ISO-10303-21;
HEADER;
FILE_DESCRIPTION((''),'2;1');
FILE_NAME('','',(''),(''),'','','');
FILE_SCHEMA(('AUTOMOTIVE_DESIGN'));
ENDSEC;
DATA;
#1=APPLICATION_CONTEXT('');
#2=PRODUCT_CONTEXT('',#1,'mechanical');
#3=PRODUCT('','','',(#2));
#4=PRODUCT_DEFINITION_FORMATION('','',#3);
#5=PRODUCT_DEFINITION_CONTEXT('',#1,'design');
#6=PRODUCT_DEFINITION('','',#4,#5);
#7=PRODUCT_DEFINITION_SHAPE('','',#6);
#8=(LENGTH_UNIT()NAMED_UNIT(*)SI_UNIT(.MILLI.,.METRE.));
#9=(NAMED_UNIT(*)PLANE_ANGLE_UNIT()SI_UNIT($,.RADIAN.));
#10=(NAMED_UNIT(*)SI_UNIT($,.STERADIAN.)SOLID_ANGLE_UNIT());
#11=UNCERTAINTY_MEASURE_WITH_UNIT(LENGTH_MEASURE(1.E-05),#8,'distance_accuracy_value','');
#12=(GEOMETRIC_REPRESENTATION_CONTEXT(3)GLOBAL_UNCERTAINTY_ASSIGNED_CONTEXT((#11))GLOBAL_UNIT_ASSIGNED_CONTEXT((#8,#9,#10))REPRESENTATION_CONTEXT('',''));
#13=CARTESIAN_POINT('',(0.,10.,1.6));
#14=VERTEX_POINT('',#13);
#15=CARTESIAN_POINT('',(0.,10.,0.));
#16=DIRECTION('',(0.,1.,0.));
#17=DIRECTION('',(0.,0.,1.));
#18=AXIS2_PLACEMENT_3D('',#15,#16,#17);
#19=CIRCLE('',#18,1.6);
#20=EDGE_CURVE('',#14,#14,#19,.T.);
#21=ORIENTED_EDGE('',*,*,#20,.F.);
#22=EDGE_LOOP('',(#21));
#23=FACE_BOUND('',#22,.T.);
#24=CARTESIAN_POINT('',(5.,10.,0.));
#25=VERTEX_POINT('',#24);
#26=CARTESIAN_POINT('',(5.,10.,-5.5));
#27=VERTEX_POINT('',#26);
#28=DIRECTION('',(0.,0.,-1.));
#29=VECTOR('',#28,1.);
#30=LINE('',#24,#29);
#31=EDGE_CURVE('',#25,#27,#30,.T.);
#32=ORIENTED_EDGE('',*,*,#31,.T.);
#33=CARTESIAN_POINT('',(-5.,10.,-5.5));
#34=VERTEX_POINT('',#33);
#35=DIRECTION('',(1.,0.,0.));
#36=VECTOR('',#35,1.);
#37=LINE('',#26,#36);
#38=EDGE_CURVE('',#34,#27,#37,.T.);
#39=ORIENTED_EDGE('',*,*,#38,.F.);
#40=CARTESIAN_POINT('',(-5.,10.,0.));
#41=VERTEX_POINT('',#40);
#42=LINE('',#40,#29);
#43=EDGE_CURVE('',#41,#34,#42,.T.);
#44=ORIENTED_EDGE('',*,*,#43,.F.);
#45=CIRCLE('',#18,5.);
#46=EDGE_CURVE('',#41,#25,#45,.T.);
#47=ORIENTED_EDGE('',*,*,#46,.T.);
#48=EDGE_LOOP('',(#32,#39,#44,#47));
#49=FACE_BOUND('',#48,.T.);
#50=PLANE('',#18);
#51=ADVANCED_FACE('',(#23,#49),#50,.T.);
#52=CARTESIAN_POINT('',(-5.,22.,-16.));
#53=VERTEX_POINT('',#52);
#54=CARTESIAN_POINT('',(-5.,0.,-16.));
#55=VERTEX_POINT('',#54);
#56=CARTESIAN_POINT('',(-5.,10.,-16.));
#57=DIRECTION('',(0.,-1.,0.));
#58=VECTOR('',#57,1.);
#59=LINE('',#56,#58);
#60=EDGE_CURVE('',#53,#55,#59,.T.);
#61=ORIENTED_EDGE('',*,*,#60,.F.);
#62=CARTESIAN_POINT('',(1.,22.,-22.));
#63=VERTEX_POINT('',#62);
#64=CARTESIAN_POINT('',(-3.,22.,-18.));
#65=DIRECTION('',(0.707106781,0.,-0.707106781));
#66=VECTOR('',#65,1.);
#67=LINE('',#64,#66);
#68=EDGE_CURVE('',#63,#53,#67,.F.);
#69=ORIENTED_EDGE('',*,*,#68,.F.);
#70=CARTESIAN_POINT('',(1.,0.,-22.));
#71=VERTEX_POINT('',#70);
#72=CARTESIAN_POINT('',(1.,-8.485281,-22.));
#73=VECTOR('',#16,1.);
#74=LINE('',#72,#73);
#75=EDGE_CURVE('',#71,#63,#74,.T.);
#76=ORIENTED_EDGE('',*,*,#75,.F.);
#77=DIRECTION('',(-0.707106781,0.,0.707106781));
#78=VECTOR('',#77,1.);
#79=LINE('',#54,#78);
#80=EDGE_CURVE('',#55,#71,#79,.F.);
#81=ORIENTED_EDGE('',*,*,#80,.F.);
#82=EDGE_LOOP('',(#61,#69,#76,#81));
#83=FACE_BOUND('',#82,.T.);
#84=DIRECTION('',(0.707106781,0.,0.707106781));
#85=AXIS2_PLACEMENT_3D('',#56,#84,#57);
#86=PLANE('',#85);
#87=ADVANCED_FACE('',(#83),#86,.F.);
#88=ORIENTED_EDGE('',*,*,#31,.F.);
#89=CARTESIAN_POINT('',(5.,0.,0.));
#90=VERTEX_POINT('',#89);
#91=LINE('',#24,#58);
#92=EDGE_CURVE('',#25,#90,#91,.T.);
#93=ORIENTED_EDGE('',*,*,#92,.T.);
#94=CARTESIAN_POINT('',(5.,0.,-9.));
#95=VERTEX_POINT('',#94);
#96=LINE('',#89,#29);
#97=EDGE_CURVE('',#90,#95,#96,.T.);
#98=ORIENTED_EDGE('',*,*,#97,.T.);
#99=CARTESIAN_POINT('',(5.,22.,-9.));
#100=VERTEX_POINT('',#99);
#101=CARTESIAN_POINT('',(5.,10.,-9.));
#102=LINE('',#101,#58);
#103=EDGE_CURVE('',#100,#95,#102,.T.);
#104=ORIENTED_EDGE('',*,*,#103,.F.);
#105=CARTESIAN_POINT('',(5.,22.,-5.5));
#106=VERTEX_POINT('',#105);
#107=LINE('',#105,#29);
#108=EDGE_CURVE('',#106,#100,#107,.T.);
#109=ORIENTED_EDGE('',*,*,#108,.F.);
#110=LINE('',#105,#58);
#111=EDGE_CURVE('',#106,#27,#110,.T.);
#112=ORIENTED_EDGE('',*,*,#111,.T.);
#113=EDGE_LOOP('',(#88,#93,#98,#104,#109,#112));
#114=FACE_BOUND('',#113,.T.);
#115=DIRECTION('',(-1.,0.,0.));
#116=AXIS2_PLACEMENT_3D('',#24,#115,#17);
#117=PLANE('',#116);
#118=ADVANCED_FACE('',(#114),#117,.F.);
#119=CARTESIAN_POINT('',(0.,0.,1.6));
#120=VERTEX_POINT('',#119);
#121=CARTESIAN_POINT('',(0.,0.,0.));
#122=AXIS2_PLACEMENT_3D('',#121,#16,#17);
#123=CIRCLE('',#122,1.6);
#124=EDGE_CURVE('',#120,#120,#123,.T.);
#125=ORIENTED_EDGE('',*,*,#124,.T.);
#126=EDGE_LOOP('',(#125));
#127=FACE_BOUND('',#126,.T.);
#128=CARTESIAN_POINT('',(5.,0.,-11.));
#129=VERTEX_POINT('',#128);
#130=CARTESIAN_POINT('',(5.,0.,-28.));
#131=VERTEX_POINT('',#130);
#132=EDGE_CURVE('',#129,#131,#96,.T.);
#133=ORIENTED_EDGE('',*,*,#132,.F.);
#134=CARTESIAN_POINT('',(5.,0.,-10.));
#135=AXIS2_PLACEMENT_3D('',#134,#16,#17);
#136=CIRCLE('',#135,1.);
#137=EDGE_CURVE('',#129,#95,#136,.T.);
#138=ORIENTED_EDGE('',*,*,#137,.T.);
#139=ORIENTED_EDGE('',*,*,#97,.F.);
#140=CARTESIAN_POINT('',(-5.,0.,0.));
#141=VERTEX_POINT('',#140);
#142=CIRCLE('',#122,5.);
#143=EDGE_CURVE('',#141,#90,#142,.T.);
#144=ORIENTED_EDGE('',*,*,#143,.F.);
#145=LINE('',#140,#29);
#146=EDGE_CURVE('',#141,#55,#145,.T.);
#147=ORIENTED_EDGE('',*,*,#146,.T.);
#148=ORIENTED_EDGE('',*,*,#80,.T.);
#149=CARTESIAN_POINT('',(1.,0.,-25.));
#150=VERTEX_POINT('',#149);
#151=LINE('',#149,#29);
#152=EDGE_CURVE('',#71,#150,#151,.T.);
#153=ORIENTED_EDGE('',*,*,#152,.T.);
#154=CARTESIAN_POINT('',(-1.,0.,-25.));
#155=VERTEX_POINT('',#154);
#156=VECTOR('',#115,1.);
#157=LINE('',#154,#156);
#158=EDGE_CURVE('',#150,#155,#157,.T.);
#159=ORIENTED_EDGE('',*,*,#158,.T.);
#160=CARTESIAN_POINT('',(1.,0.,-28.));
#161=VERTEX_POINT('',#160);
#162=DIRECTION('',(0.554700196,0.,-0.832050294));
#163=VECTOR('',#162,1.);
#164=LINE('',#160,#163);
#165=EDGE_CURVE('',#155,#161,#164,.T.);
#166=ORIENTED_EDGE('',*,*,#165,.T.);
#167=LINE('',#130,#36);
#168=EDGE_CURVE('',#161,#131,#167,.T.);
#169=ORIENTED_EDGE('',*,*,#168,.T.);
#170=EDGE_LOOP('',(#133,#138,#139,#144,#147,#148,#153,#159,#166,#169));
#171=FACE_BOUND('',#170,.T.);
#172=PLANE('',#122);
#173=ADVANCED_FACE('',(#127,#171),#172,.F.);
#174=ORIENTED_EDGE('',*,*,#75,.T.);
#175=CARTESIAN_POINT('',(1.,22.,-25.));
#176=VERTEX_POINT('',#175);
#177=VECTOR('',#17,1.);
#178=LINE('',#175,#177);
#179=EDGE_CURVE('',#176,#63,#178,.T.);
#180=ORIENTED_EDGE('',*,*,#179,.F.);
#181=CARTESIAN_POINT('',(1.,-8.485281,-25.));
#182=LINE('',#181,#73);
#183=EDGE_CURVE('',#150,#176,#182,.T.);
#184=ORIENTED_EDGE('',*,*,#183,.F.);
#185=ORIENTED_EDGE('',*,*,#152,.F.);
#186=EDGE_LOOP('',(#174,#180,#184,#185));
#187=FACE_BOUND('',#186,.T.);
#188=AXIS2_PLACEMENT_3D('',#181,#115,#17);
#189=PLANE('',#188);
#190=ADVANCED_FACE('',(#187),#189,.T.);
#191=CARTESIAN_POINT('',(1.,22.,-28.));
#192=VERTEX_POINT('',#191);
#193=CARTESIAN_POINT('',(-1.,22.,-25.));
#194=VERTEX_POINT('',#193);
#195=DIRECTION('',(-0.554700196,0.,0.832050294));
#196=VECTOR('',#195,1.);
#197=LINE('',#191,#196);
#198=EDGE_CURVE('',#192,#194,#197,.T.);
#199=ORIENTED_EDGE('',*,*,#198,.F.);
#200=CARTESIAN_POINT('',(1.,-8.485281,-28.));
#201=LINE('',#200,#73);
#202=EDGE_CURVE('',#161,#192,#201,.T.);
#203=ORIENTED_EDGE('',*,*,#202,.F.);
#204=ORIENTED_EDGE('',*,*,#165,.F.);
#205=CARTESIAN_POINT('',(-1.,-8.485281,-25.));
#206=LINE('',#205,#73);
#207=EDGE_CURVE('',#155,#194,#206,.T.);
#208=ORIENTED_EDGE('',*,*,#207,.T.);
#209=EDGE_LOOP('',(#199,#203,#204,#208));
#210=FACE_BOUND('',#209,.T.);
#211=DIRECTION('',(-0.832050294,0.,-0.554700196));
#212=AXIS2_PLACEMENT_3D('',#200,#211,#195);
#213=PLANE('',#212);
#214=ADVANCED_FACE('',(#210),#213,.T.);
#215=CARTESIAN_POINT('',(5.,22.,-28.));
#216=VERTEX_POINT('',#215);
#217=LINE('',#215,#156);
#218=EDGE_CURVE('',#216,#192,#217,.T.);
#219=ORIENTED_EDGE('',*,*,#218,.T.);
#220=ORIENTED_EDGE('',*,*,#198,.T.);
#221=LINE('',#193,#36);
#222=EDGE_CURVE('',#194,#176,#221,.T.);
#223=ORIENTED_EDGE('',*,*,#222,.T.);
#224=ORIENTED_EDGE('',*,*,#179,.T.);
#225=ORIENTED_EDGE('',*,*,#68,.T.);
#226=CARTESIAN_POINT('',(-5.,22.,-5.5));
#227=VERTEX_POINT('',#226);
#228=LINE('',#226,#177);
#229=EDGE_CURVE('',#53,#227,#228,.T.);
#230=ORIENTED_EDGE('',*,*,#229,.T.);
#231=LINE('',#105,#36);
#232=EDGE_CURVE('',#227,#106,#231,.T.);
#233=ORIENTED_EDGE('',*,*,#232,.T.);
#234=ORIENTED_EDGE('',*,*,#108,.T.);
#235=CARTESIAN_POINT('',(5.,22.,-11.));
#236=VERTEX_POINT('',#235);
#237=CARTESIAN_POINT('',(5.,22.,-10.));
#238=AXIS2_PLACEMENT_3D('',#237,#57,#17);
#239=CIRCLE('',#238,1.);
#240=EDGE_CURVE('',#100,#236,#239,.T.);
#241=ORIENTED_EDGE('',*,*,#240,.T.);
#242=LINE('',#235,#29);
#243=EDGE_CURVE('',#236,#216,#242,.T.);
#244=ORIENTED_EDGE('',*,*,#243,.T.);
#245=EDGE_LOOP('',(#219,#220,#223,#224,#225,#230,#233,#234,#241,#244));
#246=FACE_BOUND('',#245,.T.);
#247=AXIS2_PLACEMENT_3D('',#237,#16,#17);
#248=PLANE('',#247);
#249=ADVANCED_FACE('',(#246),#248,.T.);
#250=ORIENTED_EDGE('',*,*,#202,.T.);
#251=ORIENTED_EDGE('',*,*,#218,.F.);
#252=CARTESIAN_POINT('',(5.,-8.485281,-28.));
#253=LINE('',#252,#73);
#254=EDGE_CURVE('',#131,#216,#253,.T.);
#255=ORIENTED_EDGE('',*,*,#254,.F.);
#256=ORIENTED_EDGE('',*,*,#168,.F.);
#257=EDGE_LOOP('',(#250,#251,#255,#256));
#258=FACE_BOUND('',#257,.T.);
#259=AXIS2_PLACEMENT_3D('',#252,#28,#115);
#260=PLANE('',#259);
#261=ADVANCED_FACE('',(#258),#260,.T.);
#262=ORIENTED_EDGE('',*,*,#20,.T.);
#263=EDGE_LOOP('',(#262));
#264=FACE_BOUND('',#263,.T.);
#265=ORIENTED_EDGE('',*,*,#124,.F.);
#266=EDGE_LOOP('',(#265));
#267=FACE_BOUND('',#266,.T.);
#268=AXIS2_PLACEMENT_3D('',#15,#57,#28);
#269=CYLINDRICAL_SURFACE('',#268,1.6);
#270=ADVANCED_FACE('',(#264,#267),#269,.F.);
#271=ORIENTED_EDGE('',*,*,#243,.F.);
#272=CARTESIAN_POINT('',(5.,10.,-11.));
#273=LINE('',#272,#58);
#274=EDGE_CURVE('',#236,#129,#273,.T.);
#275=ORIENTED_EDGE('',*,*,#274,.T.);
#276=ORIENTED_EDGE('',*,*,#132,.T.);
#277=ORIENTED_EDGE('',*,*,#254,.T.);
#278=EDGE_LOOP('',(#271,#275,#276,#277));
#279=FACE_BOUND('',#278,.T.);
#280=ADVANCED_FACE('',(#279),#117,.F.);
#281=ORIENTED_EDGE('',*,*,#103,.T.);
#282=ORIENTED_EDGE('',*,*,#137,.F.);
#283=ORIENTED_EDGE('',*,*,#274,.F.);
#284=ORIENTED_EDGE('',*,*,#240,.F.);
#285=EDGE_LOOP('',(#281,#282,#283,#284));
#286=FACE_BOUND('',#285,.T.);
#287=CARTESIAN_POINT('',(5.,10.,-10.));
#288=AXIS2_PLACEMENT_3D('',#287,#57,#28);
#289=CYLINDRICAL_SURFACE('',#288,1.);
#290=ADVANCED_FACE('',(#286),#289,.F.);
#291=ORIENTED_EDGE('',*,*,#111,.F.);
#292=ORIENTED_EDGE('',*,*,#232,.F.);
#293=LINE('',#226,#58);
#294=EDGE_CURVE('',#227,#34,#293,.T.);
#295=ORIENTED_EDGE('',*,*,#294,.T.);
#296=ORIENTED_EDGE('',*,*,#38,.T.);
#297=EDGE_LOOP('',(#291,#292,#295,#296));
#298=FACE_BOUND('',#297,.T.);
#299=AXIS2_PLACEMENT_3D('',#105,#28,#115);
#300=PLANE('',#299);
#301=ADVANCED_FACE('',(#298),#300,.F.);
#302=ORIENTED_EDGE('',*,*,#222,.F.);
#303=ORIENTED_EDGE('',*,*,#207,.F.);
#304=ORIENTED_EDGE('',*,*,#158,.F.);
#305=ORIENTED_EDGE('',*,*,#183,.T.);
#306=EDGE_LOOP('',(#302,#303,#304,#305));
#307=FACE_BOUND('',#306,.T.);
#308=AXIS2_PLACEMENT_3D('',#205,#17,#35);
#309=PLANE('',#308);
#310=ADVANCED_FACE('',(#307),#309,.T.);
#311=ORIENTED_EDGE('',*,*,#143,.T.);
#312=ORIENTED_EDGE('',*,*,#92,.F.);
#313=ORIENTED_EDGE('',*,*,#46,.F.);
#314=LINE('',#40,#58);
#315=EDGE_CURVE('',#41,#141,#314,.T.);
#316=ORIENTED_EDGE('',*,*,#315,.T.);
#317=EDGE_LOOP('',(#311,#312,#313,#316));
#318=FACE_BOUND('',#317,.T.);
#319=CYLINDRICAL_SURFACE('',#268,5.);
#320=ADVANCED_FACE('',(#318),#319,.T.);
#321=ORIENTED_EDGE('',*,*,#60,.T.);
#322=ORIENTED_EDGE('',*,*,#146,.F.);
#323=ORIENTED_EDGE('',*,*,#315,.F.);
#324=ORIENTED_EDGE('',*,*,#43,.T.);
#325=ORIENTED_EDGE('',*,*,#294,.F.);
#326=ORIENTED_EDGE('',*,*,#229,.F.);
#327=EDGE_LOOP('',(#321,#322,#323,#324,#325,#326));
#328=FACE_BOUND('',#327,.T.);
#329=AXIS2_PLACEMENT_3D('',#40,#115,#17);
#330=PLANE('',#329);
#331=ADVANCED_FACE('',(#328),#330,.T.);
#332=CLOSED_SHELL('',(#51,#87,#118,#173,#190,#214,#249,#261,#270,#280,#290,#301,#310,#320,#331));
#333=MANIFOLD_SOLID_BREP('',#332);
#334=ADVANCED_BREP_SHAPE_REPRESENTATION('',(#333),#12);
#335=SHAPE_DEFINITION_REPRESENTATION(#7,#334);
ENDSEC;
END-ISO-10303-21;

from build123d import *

# Parameters (mm, degrees)
SKETCH1_R           = 1.6
BOSS_EXTRUDE1_DEPTH = 10
BOSS_EXTRUDE2_DEPTH = 12
BOSS_EXTRUDE3_DEPTH = 22
CHAMFER1_SIZE       = 6


with BuildPart() as part:
    # Sketch1 → Boss-Extrude1 (new body)
    with BuildSketch(Plane(origin=(0, 0, 0), x_dir=(1, 0, 0), z_dir=(0, 1, 0))):
        with BuildLine():
            Line((-5, 22), (-5, 0))
            ThreePointArc((-5, 0), (0, -5), (5, 0))
            Line((5, 0), (5, 9))
            ThreePointArc((5, 9), (4, 10), (5, 11))
            Line((5, 11), (5, 22))
            Line((5, 22), (-5, 22))
        make_face()
        with Locations(Location((0, 0, 0), (0, 0, 270))):
            Circle(SKETCH1_R, mode=Mode.SUBTRACT)
    extrude(amount=BOSS_EXTRUDE1_DEPTH)

    # Sketch3 → Boss-Extrude2 (add)
    with BuildSketch(Plane(origin=(0, 10, 0), x_dir=(1, 0, 0), z_dir=(0, 1, 0))):
        with BuildLine():
            Line((5, 5.5), (-5, 5.5))
            Line((-5, 5.5), (-5, 22))
            Line((-5, 22), (5, 22))
            Line((5, 22), (5, 11))
            ThreePointArc((5, 11), (4, 10), (5, 9))
            Line((5, 9), (5, 5.5))
        make_face()
    extrude(amount=BOSS_EXTRUDE2_DEPTH)

    # Sketch5 → Boss-Extrude3 (add)
    with BuildSketch(Plane(origin=(0, 22, 0), x_dir=(1, 0, 0), z_dir=(0, 1, 0))):
        Polygon((5, 22), (5, 28), (1, 28), (-1, 25), (1, 25), (1, 22), align=None)
    extrude(amount=-BOSS_EXTRUDE3_DEPTH)

    # Chamfer1
    chamfer1_edges = [part.edges().sort_by_distance(p)[0] for p in [
        (-5, 11, -22),
    ]]
    chamfer(chamfer1_edges, length=CHAMFER1_SIZE - 0.0001)  # a hair under: the kernel refuses the full size


solid = part.part
